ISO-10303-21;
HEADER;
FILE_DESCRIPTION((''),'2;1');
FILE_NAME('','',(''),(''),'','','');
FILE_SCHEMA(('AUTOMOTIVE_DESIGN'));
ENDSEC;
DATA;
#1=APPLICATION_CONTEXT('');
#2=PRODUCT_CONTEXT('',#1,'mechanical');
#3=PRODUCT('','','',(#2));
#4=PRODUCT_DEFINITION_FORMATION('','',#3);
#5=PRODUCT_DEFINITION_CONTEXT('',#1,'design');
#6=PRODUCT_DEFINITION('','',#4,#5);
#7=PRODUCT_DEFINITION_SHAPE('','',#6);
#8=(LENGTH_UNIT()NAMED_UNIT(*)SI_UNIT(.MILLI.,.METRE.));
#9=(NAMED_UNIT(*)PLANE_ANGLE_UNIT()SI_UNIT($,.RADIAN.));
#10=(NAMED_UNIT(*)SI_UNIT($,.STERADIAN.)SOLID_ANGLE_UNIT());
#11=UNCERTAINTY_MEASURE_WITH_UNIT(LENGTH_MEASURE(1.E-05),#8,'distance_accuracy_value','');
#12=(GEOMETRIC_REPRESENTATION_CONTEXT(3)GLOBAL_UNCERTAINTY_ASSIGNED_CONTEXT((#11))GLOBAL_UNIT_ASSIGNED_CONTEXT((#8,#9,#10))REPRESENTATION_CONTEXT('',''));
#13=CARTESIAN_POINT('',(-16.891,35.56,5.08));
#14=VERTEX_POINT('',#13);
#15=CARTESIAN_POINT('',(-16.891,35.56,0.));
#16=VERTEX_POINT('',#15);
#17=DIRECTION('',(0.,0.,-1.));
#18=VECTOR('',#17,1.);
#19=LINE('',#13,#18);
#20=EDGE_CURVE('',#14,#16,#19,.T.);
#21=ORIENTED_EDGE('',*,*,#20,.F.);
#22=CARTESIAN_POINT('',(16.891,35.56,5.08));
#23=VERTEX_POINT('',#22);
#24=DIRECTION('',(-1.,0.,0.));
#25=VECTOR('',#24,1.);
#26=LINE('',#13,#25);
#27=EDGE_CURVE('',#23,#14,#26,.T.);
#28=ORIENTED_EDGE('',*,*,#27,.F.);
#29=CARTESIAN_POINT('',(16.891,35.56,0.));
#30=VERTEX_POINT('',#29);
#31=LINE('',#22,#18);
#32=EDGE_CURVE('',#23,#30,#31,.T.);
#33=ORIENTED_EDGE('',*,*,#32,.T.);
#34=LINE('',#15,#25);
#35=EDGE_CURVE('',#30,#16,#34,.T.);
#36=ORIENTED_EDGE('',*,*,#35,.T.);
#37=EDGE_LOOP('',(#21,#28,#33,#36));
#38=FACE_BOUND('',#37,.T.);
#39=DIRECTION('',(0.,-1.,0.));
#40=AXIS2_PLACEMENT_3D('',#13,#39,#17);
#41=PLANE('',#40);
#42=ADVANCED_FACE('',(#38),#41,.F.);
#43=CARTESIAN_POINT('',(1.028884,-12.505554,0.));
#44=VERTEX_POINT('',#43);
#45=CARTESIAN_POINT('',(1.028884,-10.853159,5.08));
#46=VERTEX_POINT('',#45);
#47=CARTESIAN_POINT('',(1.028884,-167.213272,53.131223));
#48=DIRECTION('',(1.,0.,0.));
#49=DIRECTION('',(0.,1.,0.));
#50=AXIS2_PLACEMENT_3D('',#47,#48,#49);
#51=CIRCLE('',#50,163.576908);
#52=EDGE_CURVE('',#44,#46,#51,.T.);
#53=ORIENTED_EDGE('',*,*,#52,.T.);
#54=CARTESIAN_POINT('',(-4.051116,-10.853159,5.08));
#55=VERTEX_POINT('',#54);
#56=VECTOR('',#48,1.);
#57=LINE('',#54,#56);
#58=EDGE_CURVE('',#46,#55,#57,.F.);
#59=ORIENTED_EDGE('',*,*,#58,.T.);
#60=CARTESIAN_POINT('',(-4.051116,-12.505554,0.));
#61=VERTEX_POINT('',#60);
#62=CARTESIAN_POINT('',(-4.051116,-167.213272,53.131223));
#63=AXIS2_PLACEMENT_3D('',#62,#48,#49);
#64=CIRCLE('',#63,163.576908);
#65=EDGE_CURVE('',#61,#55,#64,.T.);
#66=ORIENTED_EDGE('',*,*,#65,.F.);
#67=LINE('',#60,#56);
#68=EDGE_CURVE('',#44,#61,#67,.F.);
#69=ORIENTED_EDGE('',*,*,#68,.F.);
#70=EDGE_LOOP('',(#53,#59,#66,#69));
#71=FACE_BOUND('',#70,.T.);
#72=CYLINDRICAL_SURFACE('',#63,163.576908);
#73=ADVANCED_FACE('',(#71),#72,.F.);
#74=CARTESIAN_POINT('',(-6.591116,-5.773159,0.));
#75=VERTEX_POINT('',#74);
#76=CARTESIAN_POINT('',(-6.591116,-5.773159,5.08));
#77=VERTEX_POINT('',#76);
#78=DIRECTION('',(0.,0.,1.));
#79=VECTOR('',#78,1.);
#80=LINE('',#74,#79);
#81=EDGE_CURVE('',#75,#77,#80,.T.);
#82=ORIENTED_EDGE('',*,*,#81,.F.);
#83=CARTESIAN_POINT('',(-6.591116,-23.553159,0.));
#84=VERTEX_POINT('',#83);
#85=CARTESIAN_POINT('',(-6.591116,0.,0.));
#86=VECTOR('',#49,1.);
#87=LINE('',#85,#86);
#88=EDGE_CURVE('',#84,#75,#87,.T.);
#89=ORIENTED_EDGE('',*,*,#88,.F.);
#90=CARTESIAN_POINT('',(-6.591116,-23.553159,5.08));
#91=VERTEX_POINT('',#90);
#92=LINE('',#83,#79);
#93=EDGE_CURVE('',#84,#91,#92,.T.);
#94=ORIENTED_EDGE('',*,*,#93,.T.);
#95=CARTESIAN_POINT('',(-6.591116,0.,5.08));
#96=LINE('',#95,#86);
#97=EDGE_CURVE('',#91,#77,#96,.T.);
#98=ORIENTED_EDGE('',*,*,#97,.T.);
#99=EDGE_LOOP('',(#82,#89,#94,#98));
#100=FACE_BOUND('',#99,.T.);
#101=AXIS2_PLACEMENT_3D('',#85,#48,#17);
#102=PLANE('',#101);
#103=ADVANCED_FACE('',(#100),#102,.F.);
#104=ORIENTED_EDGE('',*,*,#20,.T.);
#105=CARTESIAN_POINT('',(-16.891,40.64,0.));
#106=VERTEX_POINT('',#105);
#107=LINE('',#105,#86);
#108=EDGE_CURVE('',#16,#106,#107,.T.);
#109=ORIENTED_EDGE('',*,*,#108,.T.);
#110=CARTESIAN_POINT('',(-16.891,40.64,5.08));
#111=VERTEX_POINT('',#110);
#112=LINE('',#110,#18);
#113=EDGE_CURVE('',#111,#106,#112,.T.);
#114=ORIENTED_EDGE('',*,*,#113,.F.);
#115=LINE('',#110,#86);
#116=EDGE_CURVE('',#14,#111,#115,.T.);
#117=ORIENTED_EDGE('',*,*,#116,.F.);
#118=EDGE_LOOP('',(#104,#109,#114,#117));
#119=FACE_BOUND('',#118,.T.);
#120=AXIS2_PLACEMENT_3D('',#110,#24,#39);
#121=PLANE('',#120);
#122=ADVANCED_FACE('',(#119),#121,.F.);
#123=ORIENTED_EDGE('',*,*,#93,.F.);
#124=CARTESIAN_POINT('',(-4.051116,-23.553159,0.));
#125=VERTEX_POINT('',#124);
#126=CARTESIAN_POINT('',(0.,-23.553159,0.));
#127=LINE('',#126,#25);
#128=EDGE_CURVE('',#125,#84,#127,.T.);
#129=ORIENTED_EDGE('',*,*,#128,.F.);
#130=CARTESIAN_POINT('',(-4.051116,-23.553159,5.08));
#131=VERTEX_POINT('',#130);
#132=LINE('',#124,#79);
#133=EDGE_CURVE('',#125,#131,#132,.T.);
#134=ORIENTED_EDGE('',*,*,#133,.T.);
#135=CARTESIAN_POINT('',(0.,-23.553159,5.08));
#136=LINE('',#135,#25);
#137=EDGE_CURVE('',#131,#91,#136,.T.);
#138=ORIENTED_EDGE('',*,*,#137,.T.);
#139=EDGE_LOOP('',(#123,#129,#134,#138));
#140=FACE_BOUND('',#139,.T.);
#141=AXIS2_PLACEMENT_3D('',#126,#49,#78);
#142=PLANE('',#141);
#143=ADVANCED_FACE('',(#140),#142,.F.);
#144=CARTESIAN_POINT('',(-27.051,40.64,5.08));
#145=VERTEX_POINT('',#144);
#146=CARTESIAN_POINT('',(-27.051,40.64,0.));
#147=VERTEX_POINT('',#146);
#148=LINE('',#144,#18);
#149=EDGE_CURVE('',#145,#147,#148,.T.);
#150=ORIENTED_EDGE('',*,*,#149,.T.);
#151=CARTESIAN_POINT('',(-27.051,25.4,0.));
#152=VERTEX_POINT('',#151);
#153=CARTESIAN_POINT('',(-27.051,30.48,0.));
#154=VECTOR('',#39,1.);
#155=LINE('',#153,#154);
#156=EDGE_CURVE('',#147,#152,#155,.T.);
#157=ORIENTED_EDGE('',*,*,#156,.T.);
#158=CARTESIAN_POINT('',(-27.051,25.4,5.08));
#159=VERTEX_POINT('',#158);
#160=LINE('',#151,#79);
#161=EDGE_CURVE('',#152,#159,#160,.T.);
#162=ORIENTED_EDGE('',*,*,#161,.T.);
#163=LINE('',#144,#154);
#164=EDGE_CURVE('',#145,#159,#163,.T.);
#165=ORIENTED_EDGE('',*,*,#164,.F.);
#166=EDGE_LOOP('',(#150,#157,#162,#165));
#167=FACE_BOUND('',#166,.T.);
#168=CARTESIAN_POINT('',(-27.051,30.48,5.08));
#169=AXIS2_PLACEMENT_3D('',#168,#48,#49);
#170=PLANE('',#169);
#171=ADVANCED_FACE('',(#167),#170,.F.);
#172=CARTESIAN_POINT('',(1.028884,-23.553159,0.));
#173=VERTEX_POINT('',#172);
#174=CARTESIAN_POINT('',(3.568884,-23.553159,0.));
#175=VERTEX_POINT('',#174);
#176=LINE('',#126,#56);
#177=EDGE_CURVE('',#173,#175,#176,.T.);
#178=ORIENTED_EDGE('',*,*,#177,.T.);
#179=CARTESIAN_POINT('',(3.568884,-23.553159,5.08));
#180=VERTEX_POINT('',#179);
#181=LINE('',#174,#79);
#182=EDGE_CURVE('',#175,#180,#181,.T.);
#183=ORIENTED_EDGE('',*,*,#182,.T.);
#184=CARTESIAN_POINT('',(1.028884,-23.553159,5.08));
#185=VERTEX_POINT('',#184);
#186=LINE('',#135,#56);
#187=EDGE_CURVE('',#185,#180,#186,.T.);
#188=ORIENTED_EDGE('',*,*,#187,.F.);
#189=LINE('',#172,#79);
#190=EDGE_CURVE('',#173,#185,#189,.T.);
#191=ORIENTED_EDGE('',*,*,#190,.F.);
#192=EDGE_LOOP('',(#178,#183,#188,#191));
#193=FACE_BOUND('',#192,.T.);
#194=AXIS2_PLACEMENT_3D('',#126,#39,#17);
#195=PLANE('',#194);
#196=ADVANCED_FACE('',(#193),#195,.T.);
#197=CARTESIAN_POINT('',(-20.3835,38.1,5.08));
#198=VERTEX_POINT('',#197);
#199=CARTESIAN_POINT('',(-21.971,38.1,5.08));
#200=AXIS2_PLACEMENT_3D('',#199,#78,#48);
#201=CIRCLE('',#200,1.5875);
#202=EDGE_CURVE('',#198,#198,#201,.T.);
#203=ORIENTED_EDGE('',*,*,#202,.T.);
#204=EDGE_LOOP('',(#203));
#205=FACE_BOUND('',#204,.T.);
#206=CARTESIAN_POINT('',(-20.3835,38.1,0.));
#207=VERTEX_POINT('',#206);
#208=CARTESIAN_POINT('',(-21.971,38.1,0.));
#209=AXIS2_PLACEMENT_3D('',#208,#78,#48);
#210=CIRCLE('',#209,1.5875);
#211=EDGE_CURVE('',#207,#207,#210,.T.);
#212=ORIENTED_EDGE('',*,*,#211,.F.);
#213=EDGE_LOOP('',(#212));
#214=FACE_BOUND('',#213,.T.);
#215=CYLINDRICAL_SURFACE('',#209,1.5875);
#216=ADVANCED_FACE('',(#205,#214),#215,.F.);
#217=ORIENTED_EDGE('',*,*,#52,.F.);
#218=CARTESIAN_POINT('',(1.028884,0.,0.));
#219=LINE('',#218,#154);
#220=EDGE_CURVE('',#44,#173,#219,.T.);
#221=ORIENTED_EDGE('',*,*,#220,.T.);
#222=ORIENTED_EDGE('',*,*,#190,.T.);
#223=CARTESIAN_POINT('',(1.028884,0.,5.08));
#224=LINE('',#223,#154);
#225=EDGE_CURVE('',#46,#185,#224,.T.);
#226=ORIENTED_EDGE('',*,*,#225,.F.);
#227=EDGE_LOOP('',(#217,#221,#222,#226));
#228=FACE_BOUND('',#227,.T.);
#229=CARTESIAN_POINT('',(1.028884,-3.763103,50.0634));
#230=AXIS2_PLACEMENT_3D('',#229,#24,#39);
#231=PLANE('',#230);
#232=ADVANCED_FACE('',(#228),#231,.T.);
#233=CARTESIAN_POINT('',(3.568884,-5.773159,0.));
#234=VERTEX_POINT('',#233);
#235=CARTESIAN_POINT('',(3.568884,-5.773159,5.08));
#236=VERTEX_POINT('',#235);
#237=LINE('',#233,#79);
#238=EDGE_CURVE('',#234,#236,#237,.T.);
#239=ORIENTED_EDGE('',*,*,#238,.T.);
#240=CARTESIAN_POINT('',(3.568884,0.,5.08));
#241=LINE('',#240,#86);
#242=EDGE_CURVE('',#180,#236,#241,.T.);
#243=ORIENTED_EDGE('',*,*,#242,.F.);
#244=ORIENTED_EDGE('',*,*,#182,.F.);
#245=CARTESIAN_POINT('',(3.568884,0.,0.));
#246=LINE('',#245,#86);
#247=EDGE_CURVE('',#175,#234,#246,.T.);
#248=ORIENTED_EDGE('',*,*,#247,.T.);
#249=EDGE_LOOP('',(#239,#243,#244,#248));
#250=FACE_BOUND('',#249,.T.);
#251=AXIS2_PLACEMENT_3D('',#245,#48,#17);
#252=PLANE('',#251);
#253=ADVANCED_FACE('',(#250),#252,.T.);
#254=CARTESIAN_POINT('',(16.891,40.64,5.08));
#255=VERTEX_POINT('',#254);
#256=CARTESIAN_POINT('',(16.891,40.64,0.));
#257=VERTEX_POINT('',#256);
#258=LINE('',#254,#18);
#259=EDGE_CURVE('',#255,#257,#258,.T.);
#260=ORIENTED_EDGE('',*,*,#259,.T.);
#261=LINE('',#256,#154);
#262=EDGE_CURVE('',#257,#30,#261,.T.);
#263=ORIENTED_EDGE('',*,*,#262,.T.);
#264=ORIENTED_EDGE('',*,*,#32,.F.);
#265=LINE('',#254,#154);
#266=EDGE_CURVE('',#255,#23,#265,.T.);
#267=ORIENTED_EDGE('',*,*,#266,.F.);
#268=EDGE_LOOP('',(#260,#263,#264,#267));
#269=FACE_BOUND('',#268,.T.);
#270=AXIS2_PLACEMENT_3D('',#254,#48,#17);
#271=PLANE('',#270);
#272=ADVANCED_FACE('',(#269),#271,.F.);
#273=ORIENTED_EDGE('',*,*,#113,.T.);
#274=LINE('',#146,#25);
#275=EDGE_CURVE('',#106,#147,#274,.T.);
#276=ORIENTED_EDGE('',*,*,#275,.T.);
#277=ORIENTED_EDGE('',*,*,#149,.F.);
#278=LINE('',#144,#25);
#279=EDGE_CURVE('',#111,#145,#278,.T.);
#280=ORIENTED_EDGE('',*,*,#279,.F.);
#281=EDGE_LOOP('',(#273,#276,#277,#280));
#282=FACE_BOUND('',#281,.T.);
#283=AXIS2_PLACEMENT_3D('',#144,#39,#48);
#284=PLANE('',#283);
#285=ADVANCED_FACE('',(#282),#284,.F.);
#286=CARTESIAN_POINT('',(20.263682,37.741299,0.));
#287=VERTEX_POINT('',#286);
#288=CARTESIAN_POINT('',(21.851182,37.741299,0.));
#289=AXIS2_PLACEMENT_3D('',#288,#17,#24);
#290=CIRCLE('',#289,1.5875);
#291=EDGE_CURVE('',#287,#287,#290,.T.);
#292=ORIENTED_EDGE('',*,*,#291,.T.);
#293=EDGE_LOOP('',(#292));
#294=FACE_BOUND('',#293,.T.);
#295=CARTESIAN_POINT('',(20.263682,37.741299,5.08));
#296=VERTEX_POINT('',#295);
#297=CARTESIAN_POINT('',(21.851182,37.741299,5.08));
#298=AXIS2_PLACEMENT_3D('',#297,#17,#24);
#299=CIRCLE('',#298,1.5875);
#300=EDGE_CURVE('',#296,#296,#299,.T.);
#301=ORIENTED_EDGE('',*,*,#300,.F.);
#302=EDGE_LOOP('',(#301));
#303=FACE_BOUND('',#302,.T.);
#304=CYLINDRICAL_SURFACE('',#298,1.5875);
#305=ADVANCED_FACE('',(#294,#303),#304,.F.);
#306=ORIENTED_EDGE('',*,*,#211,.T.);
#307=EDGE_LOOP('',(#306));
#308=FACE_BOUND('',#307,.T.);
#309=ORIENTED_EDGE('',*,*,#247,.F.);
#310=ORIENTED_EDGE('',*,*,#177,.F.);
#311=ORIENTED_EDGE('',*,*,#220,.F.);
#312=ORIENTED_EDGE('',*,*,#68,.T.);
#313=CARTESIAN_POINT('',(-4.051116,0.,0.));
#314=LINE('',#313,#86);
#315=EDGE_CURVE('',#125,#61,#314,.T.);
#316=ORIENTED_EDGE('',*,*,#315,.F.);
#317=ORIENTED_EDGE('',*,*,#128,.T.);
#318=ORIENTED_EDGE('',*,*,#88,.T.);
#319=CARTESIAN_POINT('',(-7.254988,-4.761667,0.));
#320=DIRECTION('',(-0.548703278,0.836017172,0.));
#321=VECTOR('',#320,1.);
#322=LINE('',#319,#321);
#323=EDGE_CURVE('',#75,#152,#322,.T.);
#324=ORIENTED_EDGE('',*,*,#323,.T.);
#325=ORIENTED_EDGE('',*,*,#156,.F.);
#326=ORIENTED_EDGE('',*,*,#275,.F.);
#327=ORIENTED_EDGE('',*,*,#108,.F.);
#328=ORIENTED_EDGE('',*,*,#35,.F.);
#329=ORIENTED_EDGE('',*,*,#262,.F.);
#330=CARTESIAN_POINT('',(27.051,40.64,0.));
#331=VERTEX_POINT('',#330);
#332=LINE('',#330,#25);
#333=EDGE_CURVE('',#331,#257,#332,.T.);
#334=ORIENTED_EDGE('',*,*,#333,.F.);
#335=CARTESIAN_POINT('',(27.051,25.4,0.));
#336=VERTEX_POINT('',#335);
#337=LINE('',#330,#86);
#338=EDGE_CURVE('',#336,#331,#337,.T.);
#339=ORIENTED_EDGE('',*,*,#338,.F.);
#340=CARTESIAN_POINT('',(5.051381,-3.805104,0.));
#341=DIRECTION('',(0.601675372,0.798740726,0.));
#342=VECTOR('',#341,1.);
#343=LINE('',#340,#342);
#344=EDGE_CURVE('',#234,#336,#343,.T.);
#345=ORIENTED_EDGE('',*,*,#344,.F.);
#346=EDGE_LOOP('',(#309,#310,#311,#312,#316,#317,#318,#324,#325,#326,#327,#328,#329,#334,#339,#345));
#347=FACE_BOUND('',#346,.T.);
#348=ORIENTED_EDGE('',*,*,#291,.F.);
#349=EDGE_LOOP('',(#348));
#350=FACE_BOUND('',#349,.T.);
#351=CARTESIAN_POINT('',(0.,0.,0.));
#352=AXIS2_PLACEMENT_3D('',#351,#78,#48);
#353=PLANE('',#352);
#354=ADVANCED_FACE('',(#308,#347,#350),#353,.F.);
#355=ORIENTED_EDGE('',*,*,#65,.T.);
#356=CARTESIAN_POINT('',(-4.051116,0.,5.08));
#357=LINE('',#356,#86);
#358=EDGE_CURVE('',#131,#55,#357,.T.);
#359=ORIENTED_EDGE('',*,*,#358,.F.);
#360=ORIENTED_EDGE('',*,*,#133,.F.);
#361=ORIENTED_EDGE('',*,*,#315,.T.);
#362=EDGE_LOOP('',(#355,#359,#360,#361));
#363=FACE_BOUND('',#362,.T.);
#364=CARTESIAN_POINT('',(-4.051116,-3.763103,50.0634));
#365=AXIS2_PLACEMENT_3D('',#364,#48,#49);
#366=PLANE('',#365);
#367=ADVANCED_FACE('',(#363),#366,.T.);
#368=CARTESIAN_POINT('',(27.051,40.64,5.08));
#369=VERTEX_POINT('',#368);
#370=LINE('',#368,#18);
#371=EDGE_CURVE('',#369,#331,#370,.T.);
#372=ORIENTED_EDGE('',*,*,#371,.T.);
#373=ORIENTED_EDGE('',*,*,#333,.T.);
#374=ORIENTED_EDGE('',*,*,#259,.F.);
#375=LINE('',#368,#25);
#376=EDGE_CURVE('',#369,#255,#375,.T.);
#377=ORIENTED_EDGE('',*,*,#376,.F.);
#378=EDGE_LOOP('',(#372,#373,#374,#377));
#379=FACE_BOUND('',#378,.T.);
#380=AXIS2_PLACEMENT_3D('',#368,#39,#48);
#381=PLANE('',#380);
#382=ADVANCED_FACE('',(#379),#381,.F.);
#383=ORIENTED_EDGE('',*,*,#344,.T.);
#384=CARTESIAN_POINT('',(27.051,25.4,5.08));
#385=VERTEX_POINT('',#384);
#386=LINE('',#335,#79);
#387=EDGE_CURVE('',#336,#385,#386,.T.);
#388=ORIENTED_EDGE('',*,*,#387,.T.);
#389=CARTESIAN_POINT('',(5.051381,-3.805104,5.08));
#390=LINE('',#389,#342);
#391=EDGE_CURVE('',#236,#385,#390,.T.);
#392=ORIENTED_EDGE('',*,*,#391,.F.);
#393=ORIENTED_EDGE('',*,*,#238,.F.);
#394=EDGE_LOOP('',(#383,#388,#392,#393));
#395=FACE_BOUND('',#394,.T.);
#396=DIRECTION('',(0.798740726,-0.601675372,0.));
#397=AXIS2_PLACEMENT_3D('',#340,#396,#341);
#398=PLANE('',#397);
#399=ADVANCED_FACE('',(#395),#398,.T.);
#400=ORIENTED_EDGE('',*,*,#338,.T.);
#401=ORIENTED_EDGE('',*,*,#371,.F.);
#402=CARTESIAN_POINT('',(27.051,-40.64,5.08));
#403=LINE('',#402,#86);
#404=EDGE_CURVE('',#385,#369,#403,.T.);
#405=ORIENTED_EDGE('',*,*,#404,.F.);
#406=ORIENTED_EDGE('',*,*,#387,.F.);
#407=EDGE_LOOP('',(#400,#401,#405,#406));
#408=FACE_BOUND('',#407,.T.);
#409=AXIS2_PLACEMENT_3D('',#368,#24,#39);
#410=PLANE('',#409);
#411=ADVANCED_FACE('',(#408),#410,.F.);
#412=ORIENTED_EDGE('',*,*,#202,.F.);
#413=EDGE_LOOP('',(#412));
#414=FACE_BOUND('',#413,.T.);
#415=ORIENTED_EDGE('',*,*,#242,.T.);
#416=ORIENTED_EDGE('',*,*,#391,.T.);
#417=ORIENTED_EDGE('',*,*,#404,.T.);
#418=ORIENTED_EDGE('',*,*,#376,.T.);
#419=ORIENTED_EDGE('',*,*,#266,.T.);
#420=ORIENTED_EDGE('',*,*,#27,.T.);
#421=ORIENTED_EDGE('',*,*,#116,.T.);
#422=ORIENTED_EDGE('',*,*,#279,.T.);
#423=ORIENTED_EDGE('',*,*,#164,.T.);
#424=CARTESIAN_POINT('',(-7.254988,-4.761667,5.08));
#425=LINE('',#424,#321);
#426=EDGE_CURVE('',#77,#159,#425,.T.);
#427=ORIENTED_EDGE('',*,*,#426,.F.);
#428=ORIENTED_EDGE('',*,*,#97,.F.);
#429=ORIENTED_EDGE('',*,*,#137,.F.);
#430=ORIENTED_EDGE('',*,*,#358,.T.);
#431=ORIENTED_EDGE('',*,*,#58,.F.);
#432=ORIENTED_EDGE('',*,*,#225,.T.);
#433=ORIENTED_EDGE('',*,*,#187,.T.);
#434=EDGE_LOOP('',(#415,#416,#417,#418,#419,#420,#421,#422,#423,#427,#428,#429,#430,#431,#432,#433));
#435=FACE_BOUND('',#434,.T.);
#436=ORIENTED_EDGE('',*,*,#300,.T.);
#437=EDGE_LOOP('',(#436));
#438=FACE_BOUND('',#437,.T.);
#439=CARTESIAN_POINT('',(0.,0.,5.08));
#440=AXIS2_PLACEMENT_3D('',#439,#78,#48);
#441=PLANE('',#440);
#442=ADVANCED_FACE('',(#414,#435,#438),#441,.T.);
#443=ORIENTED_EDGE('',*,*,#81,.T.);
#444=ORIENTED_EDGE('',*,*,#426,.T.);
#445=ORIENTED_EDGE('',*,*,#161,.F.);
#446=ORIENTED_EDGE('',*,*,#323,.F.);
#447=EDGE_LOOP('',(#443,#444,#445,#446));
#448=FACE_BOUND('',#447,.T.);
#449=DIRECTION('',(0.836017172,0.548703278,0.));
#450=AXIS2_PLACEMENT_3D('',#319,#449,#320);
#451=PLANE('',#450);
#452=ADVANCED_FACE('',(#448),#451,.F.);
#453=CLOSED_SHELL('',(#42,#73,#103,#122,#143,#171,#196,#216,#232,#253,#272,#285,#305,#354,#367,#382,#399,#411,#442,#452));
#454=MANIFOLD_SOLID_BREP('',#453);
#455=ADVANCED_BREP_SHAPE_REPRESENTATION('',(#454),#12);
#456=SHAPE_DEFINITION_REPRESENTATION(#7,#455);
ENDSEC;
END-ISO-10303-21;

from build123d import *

# Parameters (mm, degrees)
BOSS_EXTRUDE1_DEPTH = 5.08
SKETCH2_R           = 1.5875
CUT_EXTRUDE1_DEPTH  = 50.083323044
SKETCH3_R           = 1.5875
CUT_EXTRUDE2_DEPTH  = 50.083323044
CAVITY2_START       = -4.051115689
CAVITY2_OUTLINE_R   = 1.5875
CAVITY2_DEPTH       = 5.08
CUT_EXTRUDE3_DEPTH  = 50.083323044
SKETCH7_W           = 5.08
SKETCH7_H           = 11.047605328
CUT_EXTRUDE4_DEPTH  = 50.083323044


# Read off the part's stored shape, not the designer's step: Cavity2
with BuildPart() as part:
    # Sketch1 → Boss-Extrude1 (new body)
    with BuildSketch(Plane.XY):
        Polygon((-27.051, 40.64), (-16.891, 40.64), (-16.891, 35.56), (16.891, 35.56), (16.891, 40.64), (27.051, 40.64), (27.051, 30.48), (27.051, -40.64), (-27.051, -40.64), (-27.051, 30.48), align=None)
    extrude(amount=BOSS_EXTRUDE1_DEPTH)

    # Sketch2 → Cut-Extrude1 (cut, through all)
    with BuildSketch(Plane.XY.offset(5.08)):
        with Locations((-21.971, 38.1)):
            Circle(SKETCH2_R)
    extrude(amount=-CUT_EXTRUDE1_DEPTH, mode=Mode.SUBTRACT)

    # Sketch3 → Cut-Extrude2 (cut, through all)
    with BuildSketch(Plane(origin=(0, 0, 0), x_dir=(-1, 0, 0), z_dir=(0, 0, -1))):
        with Locations((-21.851181845, 37.741299139)):
            Circle(SKETCH3_R)
    extrude(amount=-CUT_EXTRUDE2_DEPTH, mode=Mode.SUBTRACT)

    # Cavity2 outline → Cavity2 (cut)
    with BuildSketch(Plane.YZ.offset(CAVITY2_START)):
        with BuildLine():
            ThreePointArc((-24.98622483, 5.08), (-25.105854872, 2.538856915), (-25.266867575, 0))
            Line((-25.266867575, 0), (-12.505553834, 0))
            ThreePointArc((-12.505553834, 0), (-11.65861771, 2.5332542), (-10.853159162, 5.08))
            Line((-10.853159162, 5.08), (-24.98622483, 5.08))
        make_face()
        with Locations((-18.473159162, 2.54)):
            Circle(CAVITY2_OUTLINE_R, mode=Mode.SUBTRACT)
    extrude(amount=CAVITY2_DEPTH, mode=Mode.SUBTRACT)

    # Sketch4 → Cut-Extrude3 (cut, through all)
    with BuildSketch(Plane.XY.offset(5.08)):
        Polygon((-4.051115689, -24.98622483), (-4.051115689, -23.553159162), (-6.591115689, -23.553159162), (-6.591115689, -5.773159162), (-27.051, 25.4), (-27.051, -40.64), (27.051, -40.64), (27.051, 25.4), (3.568884311, -5.773159162), (3.568884311, -23.553159162), (1.028884311, -23.553159162), (1.028884311, -24.98622483), align=None)
    extrude(amount=-CUT_EXTRUDE3_DEPTH, mode=Mode.SUBTRACT)

    # Sketch7 → Cut-Extrude4 (cut, through all)
    with BuildSketch(Plane(origin=(0, 0, 0), x_dir=(-1, 0, 0), z_dir=(0, 0, -1))):
        with Locations((1.511115689, -18.029356498)):
            Rectangle(SKETCH7_W, SKETCH7_H)
    extrude(amount=-CUT_EXTRUDE4_DEPTH, mode=Mode.SUBTRACT)


solid = part.part
